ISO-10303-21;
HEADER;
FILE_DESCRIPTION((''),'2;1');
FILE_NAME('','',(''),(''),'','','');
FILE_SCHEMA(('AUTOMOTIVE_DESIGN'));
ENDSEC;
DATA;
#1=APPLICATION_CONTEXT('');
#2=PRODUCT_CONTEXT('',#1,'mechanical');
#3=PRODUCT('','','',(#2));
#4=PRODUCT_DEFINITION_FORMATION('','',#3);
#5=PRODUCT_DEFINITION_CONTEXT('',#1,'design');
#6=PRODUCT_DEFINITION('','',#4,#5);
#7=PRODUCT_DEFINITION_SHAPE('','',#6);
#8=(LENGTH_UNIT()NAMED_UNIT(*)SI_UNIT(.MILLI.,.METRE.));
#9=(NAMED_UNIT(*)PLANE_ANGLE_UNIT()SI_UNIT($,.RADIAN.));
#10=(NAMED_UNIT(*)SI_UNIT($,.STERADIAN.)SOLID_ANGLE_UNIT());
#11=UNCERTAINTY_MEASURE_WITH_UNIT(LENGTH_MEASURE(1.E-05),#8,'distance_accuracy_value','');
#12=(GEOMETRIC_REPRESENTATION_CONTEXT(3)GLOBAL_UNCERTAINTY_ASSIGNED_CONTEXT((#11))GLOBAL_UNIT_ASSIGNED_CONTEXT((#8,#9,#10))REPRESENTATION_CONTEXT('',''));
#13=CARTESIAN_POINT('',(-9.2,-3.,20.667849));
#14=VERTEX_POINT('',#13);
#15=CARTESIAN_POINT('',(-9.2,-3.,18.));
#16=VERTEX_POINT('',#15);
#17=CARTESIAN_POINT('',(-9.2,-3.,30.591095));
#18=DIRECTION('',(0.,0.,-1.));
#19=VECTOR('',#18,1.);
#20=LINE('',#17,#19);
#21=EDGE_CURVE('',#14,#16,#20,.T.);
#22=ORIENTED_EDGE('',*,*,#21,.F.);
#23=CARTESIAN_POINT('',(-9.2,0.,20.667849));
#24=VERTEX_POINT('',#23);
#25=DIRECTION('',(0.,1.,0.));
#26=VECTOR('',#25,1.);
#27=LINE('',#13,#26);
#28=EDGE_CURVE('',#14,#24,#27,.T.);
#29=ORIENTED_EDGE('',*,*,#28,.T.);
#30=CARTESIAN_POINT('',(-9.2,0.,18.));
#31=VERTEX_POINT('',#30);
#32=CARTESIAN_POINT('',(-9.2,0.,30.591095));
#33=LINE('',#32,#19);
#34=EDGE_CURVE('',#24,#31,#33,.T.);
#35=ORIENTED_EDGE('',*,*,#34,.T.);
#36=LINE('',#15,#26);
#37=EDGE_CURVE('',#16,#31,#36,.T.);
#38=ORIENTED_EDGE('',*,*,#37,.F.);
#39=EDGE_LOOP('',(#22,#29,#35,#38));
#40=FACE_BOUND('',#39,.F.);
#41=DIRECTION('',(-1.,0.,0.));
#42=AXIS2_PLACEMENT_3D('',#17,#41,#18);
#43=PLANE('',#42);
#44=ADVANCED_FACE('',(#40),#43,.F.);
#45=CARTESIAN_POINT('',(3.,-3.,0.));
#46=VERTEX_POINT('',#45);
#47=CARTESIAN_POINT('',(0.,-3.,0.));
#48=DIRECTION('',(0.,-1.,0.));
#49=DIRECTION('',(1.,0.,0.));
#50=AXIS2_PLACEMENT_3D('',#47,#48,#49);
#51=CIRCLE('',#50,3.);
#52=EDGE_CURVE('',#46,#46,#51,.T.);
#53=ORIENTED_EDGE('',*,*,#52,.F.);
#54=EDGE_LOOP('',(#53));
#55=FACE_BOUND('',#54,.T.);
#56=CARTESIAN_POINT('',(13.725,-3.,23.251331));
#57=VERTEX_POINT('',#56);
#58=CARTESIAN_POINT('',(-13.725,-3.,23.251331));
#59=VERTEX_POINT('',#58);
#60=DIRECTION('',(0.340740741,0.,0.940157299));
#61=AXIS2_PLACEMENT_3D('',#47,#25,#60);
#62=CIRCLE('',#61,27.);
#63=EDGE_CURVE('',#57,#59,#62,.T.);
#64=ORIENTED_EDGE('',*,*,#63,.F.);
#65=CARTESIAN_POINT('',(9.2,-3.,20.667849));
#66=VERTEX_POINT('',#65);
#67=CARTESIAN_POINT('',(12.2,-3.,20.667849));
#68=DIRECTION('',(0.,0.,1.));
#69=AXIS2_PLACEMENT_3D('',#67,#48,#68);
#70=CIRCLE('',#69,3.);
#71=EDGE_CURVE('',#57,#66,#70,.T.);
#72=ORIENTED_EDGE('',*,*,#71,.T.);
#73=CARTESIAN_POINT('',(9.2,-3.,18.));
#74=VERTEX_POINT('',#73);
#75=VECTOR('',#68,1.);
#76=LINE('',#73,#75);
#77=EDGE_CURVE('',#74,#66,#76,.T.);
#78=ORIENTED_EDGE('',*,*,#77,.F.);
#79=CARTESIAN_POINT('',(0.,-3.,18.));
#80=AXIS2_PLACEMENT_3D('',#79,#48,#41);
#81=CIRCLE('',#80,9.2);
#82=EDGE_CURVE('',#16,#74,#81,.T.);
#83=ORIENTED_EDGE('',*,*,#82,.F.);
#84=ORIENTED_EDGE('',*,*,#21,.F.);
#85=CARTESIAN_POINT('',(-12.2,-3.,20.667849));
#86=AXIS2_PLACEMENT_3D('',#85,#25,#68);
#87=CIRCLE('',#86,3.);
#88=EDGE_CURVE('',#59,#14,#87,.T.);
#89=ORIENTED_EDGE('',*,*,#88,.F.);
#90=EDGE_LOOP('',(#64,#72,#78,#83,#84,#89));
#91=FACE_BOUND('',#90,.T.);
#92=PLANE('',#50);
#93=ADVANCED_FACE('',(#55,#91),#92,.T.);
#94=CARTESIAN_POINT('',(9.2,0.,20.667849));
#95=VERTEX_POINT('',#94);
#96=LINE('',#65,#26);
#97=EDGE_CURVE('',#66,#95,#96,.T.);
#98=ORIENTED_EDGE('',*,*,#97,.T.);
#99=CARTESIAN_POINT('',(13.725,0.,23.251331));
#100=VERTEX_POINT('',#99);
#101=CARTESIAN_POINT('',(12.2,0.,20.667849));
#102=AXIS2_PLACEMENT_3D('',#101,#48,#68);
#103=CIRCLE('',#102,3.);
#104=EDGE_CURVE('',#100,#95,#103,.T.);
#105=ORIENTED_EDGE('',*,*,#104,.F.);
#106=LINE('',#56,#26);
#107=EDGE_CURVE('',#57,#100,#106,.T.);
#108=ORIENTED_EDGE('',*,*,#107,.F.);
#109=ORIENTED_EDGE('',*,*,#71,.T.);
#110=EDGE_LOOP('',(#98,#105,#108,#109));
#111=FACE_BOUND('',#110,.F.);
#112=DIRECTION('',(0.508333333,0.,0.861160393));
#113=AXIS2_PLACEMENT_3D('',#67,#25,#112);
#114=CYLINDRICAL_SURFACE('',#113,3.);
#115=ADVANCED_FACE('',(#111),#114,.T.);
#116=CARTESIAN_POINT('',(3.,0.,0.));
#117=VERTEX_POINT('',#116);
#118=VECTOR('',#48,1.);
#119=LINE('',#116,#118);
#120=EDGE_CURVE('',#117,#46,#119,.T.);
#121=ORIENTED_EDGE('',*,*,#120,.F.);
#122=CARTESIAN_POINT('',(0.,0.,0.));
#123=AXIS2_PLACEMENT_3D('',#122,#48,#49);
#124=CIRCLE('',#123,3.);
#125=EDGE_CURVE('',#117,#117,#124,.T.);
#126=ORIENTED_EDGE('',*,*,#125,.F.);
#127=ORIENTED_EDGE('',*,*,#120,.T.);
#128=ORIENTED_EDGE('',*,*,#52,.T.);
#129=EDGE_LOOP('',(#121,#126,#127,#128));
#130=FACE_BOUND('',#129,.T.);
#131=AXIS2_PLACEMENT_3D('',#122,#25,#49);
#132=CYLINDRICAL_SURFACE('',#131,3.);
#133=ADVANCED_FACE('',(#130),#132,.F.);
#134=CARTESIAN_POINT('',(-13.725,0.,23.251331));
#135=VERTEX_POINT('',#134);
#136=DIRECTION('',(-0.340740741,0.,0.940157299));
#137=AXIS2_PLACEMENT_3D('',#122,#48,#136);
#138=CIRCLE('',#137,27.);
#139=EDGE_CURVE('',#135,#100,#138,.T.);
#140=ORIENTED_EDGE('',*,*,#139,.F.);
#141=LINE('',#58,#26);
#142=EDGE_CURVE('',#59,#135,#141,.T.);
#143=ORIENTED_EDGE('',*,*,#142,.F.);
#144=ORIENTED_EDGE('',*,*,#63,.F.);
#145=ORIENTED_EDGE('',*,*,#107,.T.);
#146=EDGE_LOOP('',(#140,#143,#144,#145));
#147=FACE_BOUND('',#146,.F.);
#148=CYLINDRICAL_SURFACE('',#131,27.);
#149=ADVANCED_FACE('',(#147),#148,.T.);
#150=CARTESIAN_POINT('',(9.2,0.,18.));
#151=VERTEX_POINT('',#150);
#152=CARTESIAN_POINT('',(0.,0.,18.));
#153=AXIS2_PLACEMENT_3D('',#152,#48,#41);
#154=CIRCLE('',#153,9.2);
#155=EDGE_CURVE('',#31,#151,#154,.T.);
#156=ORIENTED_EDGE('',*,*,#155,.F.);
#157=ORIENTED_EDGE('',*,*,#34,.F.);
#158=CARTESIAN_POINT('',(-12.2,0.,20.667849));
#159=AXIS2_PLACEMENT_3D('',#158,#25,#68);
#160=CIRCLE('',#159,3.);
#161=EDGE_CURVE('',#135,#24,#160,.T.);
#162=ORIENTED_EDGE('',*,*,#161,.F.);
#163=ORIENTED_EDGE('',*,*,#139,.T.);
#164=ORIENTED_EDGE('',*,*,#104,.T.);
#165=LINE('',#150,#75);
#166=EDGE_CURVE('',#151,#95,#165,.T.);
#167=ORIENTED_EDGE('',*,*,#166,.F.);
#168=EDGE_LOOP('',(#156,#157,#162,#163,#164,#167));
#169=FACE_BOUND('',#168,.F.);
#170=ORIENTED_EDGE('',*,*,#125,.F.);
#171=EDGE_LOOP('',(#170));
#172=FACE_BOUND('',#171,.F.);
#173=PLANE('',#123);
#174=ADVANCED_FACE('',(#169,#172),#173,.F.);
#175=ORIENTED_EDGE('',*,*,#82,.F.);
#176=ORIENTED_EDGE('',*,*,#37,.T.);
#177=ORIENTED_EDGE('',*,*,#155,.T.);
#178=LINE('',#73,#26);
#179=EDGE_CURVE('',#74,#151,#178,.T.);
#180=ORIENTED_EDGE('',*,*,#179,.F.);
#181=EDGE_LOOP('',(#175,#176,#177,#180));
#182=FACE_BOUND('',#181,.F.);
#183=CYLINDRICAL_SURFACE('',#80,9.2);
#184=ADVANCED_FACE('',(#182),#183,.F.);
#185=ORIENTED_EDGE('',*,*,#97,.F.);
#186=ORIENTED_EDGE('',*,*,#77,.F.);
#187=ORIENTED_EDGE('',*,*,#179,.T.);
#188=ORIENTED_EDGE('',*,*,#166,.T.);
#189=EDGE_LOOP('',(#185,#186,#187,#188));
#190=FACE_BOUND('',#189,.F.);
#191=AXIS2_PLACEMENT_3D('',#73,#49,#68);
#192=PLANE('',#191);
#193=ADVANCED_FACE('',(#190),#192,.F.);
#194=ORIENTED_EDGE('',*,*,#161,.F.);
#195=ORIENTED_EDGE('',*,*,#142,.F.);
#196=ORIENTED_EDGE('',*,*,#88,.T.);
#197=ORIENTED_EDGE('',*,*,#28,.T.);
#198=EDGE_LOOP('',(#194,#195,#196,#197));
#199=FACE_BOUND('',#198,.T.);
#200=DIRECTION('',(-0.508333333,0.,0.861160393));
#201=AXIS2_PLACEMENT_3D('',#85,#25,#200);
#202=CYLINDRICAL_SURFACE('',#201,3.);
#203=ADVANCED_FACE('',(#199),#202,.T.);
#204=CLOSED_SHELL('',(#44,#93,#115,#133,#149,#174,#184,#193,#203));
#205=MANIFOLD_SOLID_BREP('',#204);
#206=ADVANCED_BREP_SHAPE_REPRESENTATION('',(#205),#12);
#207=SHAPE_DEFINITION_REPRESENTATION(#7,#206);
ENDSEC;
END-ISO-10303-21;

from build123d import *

# Parameters (mm, degrees)
F0_R     = 27
F0_R_2   = 3
F1_DEPTH = 3
F3_DEPTH = 3
F4_R     = 3


# Not quite as in the source:
# - a feature names something its author has since deleted; it is built from what else it names


with BuildPart() as f1:
    # F0 (on Front) → F1 (new body)
    with BuildSketch(Plane.XZ):
        Circle(F0_R)
        Circle(F0_R_2, mode=Mode.SUBTRACT)
    extrude(amount=F1_DEPTH)

    # F2 (on face) → F3 (cut)
    with BuildSketch(Plane.XZ.offset(3)):
        with BuildLine():
            Line((-9.2, 30.5910954097), (-9.2, 18))
            ThreePointArc((-9.2, 18), (0, 8.8), (9.2, 18))
            Line((9.2, 18), (9.2, 30.5910954097))
            Line((9.2, 30.5910954097), (-9.2, 30.5910954097))
        make_face()
    extrude(amount=-F3_DEPTH, mode=Mode.SUBTRACT)

    # F4
    f4_edges = [f1.edges().sort_by_distance(p)[0] for p in [
        (-9.2, -1.5, 25.384247),
        (9.2, -1.5, 25.384247),
    ]]
    fillet(f4_edges, radius=F4_R)


solid = f1.part
